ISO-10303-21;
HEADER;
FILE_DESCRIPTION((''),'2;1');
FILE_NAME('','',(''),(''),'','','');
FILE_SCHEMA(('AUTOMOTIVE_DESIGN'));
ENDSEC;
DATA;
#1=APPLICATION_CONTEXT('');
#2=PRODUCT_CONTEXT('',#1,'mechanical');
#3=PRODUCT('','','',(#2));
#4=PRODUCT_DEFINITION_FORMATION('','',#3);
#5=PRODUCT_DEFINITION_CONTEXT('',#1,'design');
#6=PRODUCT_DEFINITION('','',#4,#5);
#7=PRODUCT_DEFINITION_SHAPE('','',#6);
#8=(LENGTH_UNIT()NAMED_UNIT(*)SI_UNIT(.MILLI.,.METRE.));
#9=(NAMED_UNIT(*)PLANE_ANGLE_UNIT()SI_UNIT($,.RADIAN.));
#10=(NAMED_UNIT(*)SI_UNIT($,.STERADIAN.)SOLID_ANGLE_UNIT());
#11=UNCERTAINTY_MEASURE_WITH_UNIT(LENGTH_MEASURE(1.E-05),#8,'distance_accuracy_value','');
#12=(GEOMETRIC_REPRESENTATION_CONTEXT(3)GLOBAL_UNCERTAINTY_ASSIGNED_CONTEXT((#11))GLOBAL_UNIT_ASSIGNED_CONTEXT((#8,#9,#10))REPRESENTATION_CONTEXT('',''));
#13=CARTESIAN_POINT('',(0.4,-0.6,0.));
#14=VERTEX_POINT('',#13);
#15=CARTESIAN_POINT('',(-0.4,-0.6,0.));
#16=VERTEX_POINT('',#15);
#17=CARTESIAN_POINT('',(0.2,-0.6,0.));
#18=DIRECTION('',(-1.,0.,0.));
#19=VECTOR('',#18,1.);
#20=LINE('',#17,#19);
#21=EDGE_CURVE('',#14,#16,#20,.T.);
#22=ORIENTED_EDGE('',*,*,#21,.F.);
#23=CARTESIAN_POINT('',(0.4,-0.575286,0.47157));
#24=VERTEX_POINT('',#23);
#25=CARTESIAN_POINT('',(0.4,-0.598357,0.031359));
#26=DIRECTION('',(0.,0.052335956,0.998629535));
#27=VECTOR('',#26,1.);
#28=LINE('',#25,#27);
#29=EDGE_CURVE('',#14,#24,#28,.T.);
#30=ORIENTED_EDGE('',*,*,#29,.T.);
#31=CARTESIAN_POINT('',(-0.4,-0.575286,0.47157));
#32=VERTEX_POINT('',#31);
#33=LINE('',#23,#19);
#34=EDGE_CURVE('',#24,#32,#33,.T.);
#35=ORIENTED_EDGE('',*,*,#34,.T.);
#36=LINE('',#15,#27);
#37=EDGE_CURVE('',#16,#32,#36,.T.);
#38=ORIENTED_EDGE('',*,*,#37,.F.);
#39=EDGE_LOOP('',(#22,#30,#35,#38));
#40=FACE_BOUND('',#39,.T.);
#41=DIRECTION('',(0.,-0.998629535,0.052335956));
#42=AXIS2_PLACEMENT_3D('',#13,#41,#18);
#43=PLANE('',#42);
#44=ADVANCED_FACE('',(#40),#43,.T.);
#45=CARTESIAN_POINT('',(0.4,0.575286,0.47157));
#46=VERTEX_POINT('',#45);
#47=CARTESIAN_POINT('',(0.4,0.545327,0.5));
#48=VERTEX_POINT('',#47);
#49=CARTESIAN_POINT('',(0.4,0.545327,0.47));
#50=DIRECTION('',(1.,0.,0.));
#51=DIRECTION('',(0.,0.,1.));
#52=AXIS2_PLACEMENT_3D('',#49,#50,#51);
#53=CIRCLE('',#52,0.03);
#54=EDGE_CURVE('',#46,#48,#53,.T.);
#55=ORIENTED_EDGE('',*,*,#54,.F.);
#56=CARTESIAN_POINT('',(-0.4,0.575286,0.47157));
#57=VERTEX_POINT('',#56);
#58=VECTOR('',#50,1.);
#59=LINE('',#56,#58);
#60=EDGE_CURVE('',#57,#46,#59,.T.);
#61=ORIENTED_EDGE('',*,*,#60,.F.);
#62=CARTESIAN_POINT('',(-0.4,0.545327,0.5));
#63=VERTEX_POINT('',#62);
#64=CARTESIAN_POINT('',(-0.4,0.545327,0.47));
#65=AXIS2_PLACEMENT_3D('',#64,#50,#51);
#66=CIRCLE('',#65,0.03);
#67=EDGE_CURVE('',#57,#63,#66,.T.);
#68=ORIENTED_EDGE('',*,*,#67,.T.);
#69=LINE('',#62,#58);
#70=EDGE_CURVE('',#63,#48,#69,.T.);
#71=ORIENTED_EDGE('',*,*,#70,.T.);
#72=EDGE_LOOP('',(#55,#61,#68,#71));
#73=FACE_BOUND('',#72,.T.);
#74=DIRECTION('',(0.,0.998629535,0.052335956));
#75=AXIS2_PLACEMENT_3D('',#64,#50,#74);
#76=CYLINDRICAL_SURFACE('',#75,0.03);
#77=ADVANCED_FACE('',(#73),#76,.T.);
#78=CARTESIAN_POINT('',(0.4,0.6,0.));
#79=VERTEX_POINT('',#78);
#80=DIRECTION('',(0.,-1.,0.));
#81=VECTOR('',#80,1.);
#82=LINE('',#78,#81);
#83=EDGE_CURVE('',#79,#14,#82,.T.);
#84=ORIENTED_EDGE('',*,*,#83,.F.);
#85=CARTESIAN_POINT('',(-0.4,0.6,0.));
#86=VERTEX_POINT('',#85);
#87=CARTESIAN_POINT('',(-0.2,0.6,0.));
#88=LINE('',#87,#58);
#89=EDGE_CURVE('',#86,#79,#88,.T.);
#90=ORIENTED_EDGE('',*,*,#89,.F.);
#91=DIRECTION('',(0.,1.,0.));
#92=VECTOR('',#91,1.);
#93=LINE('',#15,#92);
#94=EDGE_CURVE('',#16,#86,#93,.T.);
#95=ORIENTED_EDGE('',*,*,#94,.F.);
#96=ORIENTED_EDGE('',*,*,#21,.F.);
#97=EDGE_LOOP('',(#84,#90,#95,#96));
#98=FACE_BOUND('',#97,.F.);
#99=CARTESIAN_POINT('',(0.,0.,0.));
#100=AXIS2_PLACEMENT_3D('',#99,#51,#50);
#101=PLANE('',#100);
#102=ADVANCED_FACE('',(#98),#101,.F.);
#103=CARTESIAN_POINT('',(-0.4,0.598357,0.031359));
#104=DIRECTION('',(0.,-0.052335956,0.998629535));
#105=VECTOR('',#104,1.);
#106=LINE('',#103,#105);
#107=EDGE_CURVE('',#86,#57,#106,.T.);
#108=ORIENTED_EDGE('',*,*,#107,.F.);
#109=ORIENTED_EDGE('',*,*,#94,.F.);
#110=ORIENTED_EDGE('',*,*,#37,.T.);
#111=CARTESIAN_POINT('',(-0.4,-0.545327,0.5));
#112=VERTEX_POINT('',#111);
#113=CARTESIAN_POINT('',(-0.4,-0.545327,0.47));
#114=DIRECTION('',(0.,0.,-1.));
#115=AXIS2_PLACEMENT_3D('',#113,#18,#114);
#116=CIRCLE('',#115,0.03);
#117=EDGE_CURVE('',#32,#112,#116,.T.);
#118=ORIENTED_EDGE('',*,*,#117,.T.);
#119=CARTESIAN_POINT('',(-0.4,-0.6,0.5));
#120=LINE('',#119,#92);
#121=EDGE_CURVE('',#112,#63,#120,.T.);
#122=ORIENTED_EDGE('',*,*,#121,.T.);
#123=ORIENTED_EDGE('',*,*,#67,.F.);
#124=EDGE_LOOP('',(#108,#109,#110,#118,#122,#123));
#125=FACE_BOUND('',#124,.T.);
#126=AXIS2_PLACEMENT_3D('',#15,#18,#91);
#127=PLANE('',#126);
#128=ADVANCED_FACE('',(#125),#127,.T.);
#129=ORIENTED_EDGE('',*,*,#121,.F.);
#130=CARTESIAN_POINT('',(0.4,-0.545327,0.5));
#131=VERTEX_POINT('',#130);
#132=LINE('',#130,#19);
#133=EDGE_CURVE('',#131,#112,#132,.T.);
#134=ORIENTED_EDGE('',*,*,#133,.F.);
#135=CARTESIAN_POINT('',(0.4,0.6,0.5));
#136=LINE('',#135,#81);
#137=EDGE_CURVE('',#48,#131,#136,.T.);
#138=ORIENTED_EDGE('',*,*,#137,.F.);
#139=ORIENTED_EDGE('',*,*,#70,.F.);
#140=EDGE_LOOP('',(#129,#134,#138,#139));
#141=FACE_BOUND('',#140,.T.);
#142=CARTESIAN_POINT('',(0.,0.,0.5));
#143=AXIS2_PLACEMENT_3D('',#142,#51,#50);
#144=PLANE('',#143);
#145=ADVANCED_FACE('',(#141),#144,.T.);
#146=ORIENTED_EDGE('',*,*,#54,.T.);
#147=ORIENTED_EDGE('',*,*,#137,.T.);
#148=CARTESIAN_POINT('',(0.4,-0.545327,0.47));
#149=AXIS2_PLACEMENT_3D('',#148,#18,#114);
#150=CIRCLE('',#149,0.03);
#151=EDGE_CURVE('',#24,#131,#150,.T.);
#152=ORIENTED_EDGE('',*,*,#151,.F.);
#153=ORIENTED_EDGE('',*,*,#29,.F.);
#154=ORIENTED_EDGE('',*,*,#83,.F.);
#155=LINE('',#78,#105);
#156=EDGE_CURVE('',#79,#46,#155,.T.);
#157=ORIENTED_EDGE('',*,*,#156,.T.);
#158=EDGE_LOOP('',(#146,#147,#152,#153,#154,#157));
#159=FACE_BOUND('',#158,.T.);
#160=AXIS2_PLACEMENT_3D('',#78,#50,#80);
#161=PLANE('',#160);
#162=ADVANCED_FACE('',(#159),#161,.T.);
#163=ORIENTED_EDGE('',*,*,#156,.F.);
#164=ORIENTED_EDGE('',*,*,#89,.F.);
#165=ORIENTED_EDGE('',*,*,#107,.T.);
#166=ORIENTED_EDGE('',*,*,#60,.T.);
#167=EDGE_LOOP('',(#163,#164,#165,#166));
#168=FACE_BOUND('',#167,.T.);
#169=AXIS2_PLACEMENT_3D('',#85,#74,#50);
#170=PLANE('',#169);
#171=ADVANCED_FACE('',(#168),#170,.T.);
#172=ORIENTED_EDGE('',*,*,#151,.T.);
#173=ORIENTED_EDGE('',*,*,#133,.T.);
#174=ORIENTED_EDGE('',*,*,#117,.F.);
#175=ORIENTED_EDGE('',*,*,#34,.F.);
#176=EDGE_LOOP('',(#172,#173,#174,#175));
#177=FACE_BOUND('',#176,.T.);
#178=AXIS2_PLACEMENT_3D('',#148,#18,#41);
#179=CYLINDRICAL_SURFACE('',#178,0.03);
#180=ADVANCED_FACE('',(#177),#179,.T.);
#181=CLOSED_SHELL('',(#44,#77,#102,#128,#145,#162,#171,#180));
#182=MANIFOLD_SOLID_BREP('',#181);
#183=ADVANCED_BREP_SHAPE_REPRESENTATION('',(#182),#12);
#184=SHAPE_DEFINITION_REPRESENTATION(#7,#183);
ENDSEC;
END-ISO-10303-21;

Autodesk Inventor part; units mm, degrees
ref_plane "YZ Plane" through (0, 0, 0) normal (1, 0, 0) x (0, 1, 0)
ref_plane "XZ Plane" through (0, 0, 0) normal (0, 1, 0) x (-1, 0, 0)
ref_plane "XY Plane" through (0, 0, 0) normal (0, 0, 1) x (1, 0, 0)
sketch "Sketch1" plane through (0, 0, 0) normal (0, 0, 1) x (1, 0, 0)
  line L0 (0.4, -0.6) -> (-0.4, -0.6)
  line L1 (-0.4, -0.6) -> (-0.4, 0.6)
  line L2 (-0.4, 0.6) -> (0.4, 0.6)
  line L3 (0.4, 0.6) -> (0.4, -0.6)
  line L4 (0.4, -0.6) -> (-0.4, 0.6) construction
  line L5 (-0.4, -0.6) -> (0.4, 0.6) construction
  point P0 (0, 0)
  dimension "d0" = 0.8
  dimension "d1" = 1.2
extrude "Extrusion1" add sketch "Sketch1" along normal blind 0.5
draft "FaceDraft1" angle -3 pull direction (0, 0, -1) faces at (0.1333, -0.6, 0.1667) fixed edges at (0, -0.6, 0)
draft "FaceDraft2" angle -3 pull direction (0, 0, -1) faces at (-0.1333, 0.6, 0.1667) fixed edges at (0, 0.6, 0)
fillet "Fillet1" radius 0.03 2 edges at (0, -0.5738, 0.5) (0, 0.5738, 0.5)
properties part number "LED0603-Top"
